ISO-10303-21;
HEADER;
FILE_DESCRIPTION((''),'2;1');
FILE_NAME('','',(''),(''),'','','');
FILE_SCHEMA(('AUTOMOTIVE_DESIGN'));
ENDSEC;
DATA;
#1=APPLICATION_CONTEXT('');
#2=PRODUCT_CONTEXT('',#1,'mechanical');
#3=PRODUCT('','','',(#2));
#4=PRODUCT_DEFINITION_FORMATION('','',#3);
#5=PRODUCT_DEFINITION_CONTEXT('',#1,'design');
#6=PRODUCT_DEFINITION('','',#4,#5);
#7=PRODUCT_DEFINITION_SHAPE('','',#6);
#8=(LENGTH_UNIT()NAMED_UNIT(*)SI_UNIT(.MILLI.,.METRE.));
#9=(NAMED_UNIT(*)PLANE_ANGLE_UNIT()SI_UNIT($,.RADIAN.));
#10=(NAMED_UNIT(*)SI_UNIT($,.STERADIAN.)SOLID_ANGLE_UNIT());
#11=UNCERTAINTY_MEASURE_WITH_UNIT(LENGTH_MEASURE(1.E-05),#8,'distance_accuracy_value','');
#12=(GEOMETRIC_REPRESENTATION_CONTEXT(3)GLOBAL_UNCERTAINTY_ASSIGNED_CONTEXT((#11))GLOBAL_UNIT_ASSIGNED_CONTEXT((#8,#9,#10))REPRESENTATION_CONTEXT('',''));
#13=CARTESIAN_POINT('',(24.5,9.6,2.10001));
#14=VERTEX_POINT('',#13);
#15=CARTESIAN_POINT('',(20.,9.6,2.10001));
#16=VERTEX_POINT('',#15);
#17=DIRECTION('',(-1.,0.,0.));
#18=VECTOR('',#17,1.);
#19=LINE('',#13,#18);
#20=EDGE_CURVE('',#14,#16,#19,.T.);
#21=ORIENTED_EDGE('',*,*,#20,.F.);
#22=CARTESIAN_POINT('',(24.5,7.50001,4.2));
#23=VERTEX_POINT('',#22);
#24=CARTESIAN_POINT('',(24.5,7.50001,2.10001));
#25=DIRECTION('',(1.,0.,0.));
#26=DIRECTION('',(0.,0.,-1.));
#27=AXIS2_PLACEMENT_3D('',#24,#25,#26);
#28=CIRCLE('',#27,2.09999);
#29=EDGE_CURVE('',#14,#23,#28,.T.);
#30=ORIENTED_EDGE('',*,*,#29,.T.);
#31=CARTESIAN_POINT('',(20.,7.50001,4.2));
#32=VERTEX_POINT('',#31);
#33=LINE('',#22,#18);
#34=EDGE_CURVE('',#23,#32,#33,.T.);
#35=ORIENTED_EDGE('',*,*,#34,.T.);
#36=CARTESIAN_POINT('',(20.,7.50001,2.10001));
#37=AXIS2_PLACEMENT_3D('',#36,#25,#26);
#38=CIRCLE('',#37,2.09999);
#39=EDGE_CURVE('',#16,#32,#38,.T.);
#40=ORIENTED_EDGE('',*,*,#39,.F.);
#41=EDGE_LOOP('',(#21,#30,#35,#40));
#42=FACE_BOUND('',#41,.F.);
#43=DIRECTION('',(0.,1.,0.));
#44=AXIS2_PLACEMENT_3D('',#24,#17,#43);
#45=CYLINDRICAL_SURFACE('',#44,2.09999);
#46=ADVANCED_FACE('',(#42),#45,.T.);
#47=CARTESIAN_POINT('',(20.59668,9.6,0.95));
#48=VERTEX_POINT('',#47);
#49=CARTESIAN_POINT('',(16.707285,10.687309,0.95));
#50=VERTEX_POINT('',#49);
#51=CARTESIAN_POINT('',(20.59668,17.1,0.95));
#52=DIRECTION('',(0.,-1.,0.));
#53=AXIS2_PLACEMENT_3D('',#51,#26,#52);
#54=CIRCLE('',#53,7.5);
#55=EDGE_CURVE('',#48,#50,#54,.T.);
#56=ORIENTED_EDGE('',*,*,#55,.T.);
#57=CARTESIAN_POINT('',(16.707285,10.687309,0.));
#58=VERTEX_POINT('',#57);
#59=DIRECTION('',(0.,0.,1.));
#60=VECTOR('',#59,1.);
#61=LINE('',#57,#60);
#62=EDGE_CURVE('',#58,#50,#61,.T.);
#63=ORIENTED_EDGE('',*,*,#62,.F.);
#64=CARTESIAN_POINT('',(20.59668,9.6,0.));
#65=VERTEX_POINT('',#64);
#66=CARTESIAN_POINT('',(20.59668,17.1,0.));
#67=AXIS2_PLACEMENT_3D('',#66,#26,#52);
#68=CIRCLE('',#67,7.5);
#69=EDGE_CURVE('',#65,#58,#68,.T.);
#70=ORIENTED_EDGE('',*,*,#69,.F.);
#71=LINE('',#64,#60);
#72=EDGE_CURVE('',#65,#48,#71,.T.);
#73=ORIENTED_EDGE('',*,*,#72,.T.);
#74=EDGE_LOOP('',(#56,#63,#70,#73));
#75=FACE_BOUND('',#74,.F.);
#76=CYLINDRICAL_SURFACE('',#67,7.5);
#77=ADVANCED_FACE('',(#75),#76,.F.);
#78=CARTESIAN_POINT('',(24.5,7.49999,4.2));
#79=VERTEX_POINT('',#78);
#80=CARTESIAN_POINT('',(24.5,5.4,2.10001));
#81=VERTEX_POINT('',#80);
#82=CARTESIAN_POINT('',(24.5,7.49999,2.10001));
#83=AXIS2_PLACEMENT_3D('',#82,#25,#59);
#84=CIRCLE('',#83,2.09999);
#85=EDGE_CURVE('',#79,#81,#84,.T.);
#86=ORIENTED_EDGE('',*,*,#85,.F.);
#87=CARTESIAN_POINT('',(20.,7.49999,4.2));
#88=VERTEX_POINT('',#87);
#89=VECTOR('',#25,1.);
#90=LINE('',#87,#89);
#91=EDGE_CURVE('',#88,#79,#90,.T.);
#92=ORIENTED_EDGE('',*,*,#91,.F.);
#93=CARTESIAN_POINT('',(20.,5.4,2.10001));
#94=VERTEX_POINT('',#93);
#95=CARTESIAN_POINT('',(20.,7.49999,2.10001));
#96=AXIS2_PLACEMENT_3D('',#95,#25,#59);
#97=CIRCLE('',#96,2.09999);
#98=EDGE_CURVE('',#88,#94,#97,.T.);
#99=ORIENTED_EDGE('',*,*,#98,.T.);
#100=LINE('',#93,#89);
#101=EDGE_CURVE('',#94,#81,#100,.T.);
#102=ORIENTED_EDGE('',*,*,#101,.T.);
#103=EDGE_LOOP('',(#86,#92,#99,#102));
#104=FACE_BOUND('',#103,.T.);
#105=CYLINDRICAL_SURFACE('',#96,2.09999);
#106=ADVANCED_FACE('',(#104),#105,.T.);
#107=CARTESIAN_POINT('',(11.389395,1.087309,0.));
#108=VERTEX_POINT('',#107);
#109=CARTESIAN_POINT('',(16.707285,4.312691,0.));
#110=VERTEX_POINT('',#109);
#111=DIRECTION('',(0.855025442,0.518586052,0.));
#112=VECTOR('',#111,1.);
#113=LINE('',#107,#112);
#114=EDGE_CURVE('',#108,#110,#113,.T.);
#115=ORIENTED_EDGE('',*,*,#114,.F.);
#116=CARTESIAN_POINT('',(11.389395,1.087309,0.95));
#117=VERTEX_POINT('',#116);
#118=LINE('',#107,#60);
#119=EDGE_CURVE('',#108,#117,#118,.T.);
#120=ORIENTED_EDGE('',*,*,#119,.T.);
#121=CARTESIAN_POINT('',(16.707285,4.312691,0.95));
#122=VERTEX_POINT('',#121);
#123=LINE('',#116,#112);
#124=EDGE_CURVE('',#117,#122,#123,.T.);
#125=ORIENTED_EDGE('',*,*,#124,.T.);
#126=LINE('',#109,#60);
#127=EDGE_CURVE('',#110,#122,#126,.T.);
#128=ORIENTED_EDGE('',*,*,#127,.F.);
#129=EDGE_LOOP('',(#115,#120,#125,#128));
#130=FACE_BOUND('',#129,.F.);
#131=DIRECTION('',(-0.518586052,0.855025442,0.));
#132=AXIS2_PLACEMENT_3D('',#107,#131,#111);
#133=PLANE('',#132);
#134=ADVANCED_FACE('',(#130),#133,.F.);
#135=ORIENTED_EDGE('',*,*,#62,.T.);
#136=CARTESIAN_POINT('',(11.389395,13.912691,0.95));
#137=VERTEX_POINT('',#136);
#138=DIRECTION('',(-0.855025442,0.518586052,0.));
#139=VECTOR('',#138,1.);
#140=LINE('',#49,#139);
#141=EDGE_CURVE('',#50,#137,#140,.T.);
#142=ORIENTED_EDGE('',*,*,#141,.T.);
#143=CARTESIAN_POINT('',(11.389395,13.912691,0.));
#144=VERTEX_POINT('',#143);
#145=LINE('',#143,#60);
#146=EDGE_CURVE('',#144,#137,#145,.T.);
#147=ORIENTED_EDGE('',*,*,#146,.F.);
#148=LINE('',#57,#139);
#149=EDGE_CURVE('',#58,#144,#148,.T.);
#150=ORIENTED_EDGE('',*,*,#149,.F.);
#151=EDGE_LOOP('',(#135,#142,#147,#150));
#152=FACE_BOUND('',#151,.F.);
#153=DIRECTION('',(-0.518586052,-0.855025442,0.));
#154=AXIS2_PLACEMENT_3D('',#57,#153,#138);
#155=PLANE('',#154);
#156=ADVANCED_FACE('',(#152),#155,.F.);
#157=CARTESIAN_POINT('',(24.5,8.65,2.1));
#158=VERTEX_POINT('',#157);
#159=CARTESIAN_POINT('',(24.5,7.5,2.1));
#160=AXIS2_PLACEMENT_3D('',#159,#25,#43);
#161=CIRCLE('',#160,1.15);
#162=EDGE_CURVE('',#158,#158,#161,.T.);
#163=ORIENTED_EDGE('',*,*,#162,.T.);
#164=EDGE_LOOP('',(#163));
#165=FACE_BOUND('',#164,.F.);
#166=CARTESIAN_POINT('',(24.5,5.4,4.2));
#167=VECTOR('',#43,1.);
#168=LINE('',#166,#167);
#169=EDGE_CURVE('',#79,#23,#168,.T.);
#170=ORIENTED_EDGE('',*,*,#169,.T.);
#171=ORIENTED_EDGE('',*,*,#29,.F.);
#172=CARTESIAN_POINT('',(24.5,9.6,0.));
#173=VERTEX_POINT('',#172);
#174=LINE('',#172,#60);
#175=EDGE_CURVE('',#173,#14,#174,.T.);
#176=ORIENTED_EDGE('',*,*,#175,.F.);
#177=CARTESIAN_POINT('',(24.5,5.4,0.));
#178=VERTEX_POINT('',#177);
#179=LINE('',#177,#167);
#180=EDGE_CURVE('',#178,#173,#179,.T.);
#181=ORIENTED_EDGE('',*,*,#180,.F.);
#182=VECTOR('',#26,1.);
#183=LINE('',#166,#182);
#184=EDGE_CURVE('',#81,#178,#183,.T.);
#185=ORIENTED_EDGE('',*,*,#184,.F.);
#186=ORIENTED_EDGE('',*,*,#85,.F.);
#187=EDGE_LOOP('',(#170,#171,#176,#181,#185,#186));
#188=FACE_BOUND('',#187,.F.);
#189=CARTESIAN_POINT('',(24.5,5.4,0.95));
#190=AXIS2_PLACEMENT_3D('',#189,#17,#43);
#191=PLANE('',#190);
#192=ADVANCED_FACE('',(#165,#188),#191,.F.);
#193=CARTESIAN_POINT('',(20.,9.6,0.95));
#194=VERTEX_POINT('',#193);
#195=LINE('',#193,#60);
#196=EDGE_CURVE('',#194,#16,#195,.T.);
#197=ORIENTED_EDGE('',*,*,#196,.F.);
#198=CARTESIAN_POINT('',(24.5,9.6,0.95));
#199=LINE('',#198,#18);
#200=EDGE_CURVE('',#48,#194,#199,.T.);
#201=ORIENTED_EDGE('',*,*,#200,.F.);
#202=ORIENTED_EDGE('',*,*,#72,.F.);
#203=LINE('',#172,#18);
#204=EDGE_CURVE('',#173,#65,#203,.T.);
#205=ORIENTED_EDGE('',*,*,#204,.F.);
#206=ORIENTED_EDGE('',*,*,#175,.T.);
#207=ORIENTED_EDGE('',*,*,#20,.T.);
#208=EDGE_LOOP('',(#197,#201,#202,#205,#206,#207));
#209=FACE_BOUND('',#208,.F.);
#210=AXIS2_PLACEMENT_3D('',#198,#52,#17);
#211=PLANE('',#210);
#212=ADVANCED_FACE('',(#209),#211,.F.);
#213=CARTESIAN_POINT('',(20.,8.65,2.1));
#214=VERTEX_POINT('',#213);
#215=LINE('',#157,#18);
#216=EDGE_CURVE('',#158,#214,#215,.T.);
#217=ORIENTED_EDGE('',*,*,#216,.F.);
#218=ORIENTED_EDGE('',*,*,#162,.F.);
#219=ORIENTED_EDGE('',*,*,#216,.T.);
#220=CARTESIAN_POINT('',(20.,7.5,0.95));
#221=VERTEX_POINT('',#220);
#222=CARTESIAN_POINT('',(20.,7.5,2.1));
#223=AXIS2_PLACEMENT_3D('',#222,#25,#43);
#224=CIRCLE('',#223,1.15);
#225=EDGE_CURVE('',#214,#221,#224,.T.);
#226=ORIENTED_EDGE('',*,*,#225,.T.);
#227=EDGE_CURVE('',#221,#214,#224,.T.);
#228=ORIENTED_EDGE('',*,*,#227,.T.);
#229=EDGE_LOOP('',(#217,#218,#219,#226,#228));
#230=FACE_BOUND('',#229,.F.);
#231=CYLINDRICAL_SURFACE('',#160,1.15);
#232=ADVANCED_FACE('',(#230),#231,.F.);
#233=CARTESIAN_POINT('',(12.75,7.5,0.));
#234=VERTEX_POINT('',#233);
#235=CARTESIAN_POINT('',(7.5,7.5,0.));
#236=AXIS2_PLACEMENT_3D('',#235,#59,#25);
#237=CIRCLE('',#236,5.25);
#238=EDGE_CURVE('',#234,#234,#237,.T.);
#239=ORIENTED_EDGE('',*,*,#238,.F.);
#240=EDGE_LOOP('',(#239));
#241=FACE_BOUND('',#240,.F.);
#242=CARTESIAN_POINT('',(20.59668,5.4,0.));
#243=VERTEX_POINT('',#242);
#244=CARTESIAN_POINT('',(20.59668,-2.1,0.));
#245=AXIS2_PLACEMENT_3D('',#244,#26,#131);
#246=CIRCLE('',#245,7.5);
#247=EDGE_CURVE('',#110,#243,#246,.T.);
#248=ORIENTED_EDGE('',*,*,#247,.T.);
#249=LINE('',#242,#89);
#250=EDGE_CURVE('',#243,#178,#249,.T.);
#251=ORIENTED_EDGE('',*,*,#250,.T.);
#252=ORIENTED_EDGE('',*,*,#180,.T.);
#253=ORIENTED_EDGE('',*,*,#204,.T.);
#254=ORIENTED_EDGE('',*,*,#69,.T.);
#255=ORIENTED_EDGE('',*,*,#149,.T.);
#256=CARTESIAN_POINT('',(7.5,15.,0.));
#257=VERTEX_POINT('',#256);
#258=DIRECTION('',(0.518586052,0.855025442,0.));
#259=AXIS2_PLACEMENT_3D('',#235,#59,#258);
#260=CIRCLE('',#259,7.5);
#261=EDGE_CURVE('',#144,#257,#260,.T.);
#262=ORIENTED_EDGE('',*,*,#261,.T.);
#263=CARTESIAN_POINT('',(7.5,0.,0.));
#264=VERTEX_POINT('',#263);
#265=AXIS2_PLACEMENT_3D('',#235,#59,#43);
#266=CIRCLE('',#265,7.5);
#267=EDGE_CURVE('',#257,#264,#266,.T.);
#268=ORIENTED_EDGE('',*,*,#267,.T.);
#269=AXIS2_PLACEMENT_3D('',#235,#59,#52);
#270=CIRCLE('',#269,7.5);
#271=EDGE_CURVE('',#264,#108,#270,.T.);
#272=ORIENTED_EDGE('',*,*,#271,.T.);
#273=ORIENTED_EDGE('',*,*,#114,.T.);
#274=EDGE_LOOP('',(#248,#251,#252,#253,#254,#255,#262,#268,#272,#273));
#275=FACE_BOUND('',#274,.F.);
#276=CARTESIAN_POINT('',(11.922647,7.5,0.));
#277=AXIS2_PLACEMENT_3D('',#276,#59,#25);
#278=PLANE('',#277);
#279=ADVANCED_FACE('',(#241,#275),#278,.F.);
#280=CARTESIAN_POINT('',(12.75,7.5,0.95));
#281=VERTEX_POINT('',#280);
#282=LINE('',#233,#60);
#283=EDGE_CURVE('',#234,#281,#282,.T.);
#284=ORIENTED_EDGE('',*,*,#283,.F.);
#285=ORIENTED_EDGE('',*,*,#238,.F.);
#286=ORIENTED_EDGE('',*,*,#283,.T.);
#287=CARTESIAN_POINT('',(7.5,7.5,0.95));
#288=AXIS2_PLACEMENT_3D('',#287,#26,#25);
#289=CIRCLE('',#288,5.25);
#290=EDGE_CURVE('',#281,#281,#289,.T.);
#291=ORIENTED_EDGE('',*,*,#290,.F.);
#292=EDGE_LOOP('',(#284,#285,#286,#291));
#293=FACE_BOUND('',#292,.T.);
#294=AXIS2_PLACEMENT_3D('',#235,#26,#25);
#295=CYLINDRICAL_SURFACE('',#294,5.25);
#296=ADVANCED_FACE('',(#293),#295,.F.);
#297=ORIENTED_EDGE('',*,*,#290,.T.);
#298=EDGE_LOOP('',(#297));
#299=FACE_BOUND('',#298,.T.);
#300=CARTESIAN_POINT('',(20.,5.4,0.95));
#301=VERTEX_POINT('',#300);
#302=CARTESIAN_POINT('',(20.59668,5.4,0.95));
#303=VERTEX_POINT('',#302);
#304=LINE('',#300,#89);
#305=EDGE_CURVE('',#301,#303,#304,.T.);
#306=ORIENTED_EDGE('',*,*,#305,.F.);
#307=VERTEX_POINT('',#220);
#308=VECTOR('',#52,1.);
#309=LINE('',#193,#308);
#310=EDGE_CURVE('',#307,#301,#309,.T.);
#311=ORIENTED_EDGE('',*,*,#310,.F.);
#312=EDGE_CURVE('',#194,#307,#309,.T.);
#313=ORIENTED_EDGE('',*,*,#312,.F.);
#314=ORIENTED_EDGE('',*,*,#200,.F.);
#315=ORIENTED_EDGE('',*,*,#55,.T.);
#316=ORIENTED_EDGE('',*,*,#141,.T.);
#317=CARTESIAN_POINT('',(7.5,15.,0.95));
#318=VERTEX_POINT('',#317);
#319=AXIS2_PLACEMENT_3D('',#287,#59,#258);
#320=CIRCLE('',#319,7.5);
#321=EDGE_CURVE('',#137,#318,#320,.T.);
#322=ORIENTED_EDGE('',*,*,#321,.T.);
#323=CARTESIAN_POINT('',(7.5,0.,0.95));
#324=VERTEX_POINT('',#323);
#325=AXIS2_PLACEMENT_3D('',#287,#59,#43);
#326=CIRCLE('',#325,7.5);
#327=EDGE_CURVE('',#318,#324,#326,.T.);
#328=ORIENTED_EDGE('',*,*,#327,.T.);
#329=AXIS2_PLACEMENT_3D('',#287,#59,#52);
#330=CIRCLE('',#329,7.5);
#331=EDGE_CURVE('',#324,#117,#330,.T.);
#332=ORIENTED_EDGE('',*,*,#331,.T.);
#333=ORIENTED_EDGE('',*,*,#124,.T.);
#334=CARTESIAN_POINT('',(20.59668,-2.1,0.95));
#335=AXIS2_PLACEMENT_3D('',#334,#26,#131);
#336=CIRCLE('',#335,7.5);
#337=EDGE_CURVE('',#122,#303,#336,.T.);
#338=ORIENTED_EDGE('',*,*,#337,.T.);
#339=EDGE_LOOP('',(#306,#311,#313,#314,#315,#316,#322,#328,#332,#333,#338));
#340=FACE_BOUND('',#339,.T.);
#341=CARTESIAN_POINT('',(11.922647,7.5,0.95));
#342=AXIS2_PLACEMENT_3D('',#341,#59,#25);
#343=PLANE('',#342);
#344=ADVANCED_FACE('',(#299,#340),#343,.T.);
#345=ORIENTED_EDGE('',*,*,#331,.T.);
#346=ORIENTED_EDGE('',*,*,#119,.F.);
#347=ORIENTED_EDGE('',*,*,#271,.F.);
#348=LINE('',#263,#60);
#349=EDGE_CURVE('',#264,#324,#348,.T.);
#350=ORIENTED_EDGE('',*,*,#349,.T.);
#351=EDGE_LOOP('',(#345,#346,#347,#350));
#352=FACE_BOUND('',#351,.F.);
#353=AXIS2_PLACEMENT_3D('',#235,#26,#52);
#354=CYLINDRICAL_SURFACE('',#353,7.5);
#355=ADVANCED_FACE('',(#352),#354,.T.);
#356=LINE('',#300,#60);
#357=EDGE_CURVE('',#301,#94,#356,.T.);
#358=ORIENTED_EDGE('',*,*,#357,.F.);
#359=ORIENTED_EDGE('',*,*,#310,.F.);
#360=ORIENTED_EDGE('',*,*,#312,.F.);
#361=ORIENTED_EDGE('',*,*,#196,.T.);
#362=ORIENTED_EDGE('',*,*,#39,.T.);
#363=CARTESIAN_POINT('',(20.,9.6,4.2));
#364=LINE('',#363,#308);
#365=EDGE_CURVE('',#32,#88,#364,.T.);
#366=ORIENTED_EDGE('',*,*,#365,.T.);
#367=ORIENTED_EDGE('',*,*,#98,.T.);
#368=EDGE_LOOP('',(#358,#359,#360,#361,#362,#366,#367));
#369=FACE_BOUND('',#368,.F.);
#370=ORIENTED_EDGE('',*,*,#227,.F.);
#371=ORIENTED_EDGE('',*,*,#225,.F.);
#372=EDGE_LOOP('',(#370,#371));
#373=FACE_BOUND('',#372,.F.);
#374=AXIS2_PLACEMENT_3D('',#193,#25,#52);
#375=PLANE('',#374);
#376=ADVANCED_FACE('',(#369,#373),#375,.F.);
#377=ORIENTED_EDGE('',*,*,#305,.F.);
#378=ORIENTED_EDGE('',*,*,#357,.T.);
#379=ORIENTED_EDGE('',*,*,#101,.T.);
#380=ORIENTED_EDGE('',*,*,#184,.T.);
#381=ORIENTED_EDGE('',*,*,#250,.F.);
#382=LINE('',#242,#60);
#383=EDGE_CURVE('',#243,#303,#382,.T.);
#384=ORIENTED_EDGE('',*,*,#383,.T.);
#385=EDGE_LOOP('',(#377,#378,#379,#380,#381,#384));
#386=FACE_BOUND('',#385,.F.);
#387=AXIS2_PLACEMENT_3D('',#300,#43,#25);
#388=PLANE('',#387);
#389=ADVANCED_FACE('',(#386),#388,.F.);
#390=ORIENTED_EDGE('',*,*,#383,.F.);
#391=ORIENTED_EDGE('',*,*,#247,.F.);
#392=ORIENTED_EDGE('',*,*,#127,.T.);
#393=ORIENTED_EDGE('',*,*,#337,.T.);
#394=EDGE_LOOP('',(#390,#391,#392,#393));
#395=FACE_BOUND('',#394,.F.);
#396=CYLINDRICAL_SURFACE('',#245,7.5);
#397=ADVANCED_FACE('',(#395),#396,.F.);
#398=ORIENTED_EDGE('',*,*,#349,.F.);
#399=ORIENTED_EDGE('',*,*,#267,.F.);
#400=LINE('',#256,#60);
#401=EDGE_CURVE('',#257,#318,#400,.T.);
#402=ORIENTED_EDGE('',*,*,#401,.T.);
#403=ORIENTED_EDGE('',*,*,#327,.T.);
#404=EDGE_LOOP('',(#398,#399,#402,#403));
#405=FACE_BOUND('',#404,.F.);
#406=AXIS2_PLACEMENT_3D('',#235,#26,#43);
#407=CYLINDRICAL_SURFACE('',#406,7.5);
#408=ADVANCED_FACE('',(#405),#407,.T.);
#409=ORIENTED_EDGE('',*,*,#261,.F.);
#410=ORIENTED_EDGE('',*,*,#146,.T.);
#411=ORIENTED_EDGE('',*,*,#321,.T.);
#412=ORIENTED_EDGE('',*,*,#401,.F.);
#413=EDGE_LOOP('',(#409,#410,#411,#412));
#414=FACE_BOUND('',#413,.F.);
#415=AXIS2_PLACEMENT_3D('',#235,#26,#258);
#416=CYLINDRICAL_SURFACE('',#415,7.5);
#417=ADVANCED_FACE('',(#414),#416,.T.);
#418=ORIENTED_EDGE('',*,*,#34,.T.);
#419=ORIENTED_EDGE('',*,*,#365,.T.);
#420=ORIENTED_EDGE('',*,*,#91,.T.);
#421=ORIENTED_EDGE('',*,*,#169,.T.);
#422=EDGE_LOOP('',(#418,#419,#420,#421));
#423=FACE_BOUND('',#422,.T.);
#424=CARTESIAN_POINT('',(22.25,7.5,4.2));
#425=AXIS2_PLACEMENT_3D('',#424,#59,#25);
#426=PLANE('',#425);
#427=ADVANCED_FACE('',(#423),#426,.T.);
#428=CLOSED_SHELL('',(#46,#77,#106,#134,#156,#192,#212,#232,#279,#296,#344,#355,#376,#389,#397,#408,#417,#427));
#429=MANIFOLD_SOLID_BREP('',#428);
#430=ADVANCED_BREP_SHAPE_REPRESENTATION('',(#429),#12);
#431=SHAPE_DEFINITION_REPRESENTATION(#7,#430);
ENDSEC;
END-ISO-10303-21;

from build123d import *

# Parameters (mm, degrees)
F0_R     = 5.25
F1_DEPTH = 0.95
F3_DEPTH = 3.25
F4_R     = 2.09999
F5_R     = 1.15
F6_DEPTH = 25


# Not quite as in the source:
# - a fillet or chamfer is up to 0.001 mm smaller than in the source, because OpenCascade refuses the exact size


with BuildPart() as f1:
    # F0 (on Top) → F1 (new body)
    with BuildSketch(Plane.XY):
        with BuildLine():
            Line((20.596680348, 5.4), (24.5, 5.4))
            Line((24.5, 5.4), (24.5, 9.6))
            Line((24.5, 9.6), (20.596680348, 9.6))
            ThreePointArc((20.596680348, 9.6), (18.5774207214, 9.8769403602), (16.7072849584, 10.6873091839))
            Line((16.7072849584, 10.6873091839), (11.3893953897, 13.9126908161))
            ThreePointArc((11.3893953897, 13.9126908161), (9.5192596266, 14.7230596398), (7.5, 15))
            ThreePointArc((7.5, 15), (2.1966991411, 12.8033008589), (0, 7.5))
            ThreePointArc((0, 7.5), (2.1966991411, 2.1966991411), (7.5, 0))
            ThreePointArc((7.5, 0), (9.5192596266, 0.2769403602), (11.3893953897, 1.0873091839))
            Line((11.3893953897, 1.0873091839), (16.7072849584, 4.3126908161))
            ThreePointArc((16.7072849584, 4.3126908161), (18.5774207214, 5.1230596398), (20.596680348, 5.4))
        make_face()
        with Locations((7.5, 7.5)):
            Circle(F0_R, mode=Mode.SUBTRACT)
    extrude(amount=F1_DEPTH)

    # F2 (on face) → F3 (join)
    with BuildSketch(Plane.XY.offset(0.95)):
        Polygon((24.5, 5.4), (24.5, 9.6), (20.596680348, 9.6), (20, 9.6), (20, 5.4), (20.596680348, 5.4), align=None)
    extrude(amount=F3_DEPTH)

    # F4 (radius 2.1 in the source; OpenCascade refuses exactly that, so slightly less here)
    f4_edges = [f1.edges().sort_by_distance(p)[0] for p in [
        (22.25, 9.6, 4.2),
        (22.25, 5.4, 4.2),
    ]]
    fillet(f4_edges, radius=F4_R)

    # F5 (on face) → F6 (cut)
    with BuildSketch(Plane.YZ.offset(24.5)):
        with Locations((7.5, 2.1)):
            Circle(F5_R)
    extrude(amount=-F6_DEPTH, mode=Mode.SUBTRACT)


solid = f1.part
